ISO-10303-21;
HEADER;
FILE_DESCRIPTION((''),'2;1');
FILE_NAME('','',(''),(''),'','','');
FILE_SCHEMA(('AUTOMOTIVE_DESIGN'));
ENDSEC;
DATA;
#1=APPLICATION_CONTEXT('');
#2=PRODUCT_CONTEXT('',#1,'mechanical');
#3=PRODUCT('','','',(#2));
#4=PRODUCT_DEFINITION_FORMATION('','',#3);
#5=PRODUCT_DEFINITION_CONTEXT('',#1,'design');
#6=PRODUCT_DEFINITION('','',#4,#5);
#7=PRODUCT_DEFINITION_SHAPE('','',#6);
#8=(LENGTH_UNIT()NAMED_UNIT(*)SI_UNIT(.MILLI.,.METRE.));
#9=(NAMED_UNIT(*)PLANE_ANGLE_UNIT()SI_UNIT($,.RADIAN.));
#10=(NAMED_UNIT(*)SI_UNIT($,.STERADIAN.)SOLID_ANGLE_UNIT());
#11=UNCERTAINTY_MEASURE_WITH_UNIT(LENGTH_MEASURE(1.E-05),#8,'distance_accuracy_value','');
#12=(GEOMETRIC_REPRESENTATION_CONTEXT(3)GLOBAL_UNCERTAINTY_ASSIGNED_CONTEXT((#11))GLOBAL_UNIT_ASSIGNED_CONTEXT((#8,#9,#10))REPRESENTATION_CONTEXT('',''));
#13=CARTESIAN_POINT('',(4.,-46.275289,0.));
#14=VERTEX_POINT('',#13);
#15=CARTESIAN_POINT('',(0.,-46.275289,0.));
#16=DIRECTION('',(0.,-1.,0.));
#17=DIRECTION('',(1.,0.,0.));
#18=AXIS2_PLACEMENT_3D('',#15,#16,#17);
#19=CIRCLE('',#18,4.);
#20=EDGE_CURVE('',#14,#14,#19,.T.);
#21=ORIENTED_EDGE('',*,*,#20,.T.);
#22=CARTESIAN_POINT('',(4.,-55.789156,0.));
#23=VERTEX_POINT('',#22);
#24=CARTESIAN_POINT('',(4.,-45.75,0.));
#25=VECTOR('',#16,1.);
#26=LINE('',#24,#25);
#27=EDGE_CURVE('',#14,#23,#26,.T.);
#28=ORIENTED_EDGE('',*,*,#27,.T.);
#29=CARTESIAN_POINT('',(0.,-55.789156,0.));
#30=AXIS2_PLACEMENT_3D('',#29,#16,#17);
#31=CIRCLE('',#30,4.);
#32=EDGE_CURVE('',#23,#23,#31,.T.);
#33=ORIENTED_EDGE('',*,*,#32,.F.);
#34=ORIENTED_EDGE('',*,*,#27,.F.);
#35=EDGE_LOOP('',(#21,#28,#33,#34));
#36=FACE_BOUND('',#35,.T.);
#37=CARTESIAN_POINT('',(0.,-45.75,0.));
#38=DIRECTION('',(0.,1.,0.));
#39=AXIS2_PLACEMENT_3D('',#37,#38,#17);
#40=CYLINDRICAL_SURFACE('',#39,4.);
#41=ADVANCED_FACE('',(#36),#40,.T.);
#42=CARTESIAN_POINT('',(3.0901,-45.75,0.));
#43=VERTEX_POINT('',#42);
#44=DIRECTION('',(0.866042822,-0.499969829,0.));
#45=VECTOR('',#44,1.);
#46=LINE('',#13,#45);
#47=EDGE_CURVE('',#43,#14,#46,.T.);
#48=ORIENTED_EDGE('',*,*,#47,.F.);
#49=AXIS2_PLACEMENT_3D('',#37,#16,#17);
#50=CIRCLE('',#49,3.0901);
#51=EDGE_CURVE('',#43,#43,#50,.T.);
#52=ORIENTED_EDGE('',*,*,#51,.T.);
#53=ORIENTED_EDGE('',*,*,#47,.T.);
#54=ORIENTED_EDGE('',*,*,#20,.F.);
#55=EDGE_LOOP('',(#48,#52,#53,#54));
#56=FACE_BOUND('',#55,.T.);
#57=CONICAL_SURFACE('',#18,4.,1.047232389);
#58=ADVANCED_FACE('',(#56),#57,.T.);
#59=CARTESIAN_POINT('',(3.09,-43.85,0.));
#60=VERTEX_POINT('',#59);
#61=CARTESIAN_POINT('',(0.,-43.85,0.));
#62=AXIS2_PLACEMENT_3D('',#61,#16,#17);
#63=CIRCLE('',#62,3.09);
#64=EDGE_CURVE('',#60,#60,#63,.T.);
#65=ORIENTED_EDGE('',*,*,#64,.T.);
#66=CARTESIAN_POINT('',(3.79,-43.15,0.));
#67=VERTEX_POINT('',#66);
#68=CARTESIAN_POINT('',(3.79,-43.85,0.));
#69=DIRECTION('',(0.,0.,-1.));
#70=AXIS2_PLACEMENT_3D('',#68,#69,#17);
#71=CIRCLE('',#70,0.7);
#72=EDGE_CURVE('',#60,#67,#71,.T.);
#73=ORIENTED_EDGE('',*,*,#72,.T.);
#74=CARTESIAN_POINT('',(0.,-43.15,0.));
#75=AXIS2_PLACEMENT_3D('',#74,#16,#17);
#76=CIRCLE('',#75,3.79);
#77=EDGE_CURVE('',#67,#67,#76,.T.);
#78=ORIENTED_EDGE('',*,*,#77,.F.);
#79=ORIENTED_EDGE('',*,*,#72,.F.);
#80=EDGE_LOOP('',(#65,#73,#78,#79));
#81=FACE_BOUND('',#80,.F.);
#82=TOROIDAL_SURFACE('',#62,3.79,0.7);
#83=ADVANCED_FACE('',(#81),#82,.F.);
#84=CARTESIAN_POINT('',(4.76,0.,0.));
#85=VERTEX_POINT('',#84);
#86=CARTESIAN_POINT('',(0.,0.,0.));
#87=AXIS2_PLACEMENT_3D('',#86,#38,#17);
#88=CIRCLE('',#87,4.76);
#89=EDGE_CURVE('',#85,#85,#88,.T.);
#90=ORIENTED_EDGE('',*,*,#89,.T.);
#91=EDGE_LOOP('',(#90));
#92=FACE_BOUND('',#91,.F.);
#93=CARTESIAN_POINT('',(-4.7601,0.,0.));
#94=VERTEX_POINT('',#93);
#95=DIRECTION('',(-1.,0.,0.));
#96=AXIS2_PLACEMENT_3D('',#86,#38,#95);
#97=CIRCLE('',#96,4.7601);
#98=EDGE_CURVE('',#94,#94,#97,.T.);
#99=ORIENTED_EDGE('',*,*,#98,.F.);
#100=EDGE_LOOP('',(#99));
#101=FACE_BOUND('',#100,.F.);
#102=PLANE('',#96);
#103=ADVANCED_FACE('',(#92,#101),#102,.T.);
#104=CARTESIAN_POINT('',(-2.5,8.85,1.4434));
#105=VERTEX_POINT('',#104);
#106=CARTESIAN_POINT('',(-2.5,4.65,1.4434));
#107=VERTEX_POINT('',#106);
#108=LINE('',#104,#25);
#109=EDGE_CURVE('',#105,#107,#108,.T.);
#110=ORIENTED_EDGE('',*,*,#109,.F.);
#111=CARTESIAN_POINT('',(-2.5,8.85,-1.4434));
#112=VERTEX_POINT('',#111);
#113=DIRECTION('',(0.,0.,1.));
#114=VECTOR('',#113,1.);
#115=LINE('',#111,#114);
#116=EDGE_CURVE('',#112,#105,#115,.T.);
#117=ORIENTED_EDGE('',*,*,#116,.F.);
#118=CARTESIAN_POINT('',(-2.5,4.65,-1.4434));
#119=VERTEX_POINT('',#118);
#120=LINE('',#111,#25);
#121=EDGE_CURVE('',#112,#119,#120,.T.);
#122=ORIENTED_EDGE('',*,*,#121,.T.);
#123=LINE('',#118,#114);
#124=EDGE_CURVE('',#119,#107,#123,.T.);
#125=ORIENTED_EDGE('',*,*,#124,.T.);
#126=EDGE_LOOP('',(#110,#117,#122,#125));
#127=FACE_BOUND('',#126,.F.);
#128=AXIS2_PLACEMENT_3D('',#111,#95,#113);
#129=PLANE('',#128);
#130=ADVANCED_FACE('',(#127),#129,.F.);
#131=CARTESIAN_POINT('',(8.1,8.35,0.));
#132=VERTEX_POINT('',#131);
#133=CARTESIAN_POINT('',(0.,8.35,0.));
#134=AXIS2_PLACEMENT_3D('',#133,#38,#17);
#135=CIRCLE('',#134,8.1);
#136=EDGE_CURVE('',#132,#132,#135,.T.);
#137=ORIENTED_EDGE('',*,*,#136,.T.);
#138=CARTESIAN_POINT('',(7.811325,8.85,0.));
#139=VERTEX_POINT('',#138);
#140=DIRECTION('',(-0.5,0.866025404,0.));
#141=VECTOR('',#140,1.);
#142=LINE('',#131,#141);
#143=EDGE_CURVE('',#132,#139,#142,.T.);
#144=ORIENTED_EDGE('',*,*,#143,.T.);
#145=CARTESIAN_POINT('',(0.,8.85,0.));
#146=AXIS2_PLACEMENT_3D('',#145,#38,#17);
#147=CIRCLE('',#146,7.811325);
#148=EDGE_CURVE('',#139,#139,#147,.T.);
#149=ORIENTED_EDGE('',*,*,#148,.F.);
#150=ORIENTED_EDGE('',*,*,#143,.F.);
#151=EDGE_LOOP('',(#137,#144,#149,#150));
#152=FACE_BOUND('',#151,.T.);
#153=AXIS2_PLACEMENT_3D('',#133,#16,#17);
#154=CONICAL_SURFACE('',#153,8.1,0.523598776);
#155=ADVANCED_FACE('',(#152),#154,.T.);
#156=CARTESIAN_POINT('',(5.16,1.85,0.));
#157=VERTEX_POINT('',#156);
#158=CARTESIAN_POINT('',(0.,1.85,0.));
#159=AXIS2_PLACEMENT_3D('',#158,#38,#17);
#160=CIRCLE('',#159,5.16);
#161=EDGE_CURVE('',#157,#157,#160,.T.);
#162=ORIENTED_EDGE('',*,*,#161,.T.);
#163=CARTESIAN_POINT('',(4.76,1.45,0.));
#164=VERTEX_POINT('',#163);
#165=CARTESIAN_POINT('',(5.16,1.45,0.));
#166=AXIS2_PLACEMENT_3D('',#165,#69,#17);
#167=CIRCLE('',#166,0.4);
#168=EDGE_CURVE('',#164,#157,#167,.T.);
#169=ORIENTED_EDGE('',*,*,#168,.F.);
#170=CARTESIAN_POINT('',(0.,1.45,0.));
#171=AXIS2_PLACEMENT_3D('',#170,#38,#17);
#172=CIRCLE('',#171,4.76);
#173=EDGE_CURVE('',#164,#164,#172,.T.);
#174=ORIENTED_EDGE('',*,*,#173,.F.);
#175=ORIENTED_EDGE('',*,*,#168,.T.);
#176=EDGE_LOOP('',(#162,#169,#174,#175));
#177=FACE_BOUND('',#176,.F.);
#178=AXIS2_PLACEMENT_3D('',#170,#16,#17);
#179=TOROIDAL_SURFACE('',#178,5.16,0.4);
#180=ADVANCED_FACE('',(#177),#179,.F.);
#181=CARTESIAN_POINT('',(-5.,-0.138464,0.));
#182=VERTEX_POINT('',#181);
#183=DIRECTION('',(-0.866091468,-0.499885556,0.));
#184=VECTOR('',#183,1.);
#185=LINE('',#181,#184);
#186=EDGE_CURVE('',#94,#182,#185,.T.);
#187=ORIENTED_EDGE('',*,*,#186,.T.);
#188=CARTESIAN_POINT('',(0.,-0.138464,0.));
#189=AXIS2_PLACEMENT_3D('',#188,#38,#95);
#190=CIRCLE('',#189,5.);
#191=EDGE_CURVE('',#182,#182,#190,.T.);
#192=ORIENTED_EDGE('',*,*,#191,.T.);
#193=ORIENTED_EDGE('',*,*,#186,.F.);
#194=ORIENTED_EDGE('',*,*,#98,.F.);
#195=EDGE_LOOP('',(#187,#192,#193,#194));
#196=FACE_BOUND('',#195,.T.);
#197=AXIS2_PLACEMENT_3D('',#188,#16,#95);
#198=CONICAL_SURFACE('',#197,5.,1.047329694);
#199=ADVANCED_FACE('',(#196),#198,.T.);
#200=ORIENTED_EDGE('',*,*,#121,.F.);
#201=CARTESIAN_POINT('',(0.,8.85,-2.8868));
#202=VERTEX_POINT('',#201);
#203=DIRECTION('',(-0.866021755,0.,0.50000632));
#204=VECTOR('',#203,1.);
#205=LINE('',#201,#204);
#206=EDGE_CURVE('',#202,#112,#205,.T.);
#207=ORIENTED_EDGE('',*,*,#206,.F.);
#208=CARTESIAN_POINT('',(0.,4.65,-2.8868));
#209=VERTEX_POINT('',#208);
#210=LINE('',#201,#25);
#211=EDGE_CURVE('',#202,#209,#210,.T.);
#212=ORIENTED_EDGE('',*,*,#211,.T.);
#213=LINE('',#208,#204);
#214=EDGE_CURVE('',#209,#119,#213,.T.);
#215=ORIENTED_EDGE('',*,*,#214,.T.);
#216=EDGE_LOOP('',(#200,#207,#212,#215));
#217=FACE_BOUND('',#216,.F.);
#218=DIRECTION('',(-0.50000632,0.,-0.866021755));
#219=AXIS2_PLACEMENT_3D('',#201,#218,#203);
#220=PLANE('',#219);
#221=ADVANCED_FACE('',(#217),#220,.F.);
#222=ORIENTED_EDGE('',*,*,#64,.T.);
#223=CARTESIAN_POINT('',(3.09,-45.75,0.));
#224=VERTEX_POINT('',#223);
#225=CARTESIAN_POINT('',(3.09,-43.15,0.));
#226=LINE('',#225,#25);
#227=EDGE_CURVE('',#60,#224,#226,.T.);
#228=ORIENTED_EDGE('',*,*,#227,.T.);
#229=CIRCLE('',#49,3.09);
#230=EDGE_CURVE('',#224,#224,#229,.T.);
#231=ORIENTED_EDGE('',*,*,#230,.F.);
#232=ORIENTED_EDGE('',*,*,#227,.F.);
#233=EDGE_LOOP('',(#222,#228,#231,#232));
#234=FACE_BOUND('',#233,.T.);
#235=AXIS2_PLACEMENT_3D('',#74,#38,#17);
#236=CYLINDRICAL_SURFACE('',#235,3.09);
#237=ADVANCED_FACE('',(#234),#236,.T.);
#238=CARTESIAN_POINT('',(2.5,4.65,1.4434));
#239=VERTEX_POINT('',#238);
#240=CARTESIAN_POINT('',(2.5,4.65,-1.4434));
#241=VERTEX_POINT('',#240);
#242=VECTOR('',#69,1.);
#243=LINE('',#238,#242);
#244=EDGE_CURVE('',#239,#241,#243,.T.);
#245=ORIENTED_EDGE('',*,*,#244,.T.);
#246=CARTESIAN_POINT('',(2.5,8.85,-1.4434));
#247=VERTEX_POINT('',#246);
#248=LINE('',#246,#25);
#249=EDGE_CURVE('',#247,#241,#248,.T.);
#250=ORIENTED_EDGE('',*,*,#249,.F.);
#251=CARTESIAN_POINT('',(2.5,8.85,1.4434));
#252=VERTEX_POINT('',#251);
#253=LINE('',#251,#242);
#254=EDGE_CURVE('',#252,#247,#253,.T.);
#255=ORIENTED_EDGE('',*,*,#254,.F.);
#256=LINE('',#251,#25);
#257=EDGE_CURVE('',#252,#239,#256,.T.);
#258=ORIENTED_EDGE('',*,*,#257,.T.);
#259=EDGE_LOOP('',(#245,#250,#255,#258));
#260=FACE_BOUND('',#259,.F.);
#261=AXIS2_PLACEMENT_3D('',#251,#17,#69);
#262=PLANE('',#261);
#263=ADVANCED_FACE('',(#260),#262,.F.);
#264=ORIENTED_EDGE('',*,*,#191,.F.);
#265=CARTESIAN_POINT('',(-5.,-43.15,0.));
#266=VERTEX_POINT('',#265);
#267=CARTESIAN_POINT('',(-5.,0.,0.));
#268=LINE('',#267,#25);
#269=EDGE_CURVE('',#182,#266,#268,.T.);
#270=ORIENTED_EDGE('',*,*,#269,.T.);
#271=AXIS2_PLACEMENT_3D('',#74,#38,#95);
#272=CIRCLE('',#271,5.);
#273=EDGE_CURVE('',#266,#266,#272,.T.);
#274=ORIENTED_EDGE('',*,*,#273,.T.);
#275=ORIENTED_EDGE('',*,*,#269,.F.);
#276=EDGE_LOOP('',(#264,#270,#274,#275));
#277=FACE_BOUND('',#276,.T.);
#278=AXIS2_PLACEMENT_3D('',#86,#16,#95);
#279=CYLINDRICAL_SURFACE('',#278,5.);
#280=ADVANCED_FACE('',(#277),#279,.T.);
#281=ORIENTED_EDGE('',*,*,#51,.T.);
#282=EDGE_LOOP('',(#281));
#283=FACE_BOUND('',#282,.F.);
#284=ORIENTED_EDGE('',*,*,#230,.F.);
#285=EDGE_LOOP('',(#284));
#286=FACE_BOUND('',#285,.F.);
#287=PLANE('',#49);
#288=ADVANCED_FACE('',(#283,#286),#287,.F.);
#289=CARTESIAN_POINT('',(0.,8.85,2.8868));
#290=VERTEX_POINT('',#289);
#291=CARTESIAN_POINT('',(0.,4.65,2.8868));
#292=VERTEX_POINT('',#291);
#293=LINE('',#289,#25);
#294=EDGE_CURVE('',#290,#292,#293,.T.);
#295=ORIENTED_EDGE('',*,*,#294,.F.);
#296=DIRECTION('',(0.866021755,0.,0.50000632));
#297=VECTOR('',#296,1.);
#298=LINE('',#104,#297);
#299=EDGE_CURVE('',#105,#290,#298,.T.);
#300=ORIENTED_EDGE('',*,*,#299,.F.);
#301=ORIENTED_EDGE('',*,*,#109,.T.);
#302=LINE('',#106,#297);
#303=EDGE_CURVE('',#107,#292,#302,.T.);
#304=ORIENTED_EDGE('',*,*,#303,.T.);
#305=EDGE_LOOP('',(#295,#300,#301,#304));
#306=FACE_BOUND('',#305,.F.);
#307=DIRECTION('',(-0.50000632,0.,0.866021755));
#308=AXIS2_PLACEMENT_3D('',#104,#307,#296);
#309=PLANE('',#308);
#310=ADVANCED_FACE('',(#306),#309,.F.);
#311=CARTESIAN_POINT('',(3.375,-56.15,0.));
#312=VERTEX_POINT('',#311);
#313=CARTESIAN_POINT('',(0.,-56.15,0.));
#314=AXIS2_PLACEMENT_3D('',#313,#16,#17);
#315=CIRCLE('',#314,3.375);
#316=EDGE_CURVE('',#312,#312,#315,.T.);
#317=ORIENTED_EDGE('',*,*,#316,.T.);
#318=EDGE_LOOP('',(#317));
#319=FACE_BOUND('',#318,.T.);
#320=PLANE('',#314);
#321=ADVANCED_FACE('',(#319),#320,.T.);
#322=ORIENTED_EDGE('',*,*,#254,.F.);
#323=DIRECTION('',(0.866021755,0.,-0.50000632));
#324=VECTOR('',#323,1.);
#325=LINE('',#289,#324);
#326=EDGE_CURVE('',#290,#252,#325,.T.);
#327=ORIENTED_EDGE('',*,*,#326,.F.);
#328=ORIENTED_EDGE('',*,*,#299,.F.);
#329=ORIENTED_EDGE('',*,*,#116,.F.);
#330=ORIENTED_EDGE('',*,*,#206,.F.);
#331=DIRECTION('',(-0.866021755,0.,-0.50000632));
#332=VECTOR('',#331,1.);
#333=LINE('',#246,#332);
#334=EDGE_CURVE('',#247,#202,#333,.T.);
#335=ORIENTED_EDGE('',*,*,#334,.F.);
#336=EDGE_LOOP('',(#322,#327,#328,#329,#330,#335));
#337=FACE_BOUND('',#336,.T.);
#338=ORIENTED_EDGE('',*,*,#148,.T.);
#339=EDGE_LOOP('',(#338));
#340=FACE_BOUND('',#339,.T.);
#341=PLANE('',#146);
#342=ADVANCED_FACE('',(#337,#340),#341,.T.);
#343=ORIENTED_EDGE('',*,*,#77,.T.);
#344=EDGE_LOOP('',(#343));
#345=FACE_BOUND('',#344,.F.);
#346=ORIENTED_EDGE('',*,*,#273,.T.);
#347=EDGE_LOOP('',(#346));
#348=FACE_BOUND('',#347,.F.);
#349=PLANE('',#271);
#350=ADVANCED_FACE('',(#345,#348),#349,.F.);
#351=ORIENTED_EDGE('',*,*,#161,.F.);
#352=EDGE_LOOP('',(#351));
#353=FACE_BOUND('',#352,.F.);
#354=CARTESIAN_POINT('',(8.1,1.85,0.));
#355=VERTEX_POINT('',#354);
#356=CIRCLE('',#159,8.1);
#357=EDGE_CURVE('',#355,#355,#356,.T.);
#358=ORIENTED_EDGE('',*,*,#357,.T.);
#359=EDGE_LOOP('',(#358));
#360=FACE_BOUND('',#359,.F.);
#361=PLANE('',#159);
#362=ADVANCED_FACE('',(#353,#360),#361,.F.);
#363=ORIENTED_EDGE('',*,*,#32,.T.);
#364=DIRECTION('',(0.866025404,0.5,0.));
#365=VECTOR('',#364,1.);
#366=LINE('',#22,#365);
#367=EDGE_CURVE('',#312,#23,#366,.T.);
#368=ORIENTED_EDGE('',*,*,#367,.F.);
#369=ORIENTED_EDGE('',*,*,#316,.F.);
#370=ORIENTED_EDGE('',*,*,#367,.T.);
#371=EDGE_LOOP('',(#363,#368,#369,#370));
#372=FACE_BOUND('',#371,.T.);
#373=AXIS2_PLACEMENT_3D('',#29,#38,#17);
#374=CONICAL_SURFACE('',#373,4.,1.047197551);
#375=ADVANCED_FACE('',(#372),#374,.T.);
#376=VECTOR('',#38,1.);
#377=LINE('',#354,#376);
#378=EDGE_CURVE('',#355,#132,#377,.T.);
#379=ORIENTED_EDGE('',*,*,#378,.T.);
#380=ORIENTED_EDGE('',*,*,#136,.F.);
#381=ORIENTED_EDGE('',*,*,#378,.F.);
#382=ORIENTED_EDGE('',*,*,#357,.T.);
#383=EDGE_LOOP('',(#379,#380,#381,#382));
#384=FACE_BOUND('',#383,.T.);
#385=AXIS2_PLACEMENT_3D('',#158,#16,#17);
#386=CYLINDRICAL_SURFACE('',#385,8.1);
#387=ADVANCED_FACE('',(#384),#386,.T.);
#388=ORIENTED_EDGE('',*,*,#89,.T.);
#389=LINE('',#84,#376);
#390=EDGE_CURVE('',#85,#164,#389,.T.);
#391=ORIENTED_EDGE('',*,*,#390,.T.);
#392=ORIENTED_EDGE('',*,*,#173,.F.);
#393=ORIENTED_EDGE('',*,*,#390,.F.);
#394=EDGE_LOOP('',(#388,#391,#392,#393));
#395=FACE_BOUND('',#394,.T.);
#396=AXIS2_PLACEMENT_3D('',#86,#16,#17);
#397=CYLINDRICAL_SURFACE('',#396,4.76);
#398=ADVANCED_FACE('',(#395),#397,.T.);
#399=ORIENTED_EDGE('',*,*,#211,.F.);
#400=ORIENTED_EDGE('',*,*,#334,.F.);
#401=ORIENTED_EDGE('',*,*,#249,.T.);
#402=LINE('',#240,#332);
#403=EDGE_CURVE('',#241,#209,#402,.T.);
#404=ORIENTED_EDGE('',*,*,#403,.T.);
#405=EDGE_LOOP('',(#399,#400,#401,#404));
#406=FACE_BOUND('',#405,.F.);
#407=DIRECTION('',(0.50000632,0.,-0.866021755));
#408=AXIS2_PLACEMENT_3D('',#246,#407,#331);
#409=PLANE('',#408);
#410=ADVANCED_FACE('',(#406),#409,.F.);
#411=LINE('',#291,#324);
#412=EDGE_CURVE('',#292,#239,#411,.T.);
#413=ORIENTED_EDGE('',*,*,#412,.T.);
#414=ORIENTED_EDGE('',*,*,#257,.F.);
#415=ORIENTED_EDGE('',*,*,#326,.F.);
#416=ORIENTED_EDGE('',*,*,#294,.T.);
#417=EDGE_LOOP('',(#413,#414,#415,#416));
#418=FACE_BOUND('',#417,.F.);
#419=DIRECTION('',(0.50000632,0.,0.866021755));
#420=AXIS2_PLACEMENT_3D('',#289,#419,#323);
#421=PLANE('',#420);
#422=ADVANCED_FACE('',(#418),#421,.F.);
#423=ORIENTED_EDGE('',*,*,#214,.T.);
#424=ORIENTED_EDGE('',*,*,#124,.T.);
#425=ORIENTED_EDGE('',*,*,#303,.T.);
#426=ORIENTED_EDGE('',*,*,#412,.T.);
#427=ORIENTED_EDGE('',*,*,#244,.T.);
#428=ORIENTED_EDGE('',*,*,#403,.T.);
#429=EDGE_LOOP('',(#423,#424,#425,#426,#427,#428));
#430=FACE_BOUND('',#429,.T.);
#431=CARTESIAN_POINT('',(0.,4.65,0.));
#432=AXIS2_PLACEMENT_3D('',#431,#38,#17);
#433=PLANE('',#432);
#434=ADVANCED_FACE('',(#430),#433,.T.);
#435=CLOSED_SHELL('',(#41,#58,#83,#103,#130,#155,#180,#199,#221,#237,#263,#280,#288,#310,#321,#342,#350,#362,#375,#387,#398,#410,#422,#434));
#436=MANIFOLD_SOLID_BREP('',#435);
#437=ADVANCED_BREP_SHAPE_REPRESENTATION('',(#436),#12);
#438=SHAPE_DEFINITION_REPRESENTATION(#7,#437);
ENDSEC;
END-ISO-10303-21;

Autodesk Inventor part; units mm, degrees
ref_plane "YZ Plane" through (0, 0, 0) normal (1, 0, 0) x (0, 1, 0)
ref_plane "XZ Plane" through (0, 0, 0) normal (0, 1, 0) x (-1, 0, 0)
ref_plane "XY Plane" through (0, 0, 0) normal (0, 0, 1) x (1, 0, 0)
sketch "Sketch1" plane through (0, 0, 0) normal (0, 0, 1) x (1, 0, 0)
  line L0 (0, 0) -> (-5, 0)
  line L1 (-5, 0) -> (-5, -43.15)
  line L2 (-5, -43.15) -> (0, -43.15)
  line L3 (0, -43.15) -> (0, 0)
  line L4 (0, 0) -> (-13.1356, 0) construction
  dimension "d1" = 43.15
  dimension "d2" = 5
revolve "Shoulder" add sketch "Sketch1" angle 360 about axis through (0, -43.15, 0) along (0, 1, 0)
sketch "Sketch2" plane through (0, 0, 0) normal (0, 1, 0) x (1, 0, 0)
  circle A0 centre (0, 0) radius 5 projected
  circle A1 centre (0, 0) radius 4.76
  dimension "d3" = 9.52
extrude "Shoulder_neck" add sketch "Sketch2" along normal blind 1.85 contours A1
sketch "Sketch3" plane through (0, 1.85, 0) normal (0, 1, 0) x (1, 0, 0)
  circle A0 centre (0, 0) radius 4.76 projected
  circle A1 centre (0, 0) radius 8.1
  dimension "d6" = 16.2
extrude "Head" add sketch "Sketch3" along normal blind 7 contours A0 | A1
sketch "Sketch4" plane through (0, -43.15, 0) normal (0, -1, 0) x (1, 0, 0)
  circle A0 centre (0, 0) radius 5 projected
  circle A1 centre (0, 0) radius 3.09
  dimension "d9" = 6.18
extrude "Thread_neck" add sketch "Sketch4" along normal blind 2.6 contours A1
sketch "Sketch5" plane through (0, -45.75, 0) normal (0, -1, 0) x (1, 0, 0)
  circle A0 centre (0, 0) radius 3.09 projected
  circle A1 centre (0, 0) radius 4
  dimension "d12" = 8
extrude "Thread_shoulder" add sketch "Sketch5" along normal blind 10.4 contours A0 | A1
sketch "Sketch6" plane through (0, 8.85, 0) normal (0, 1, 0) x (1, 0, 0)
  circle A0 centre (0, 0) radius 8.1 projected
  circle A1 centre (0, 0) radius 2.5 construction
  line L0 (-2.5, 1.4434) -> (-2.5, -1.4434)
  line L1 (-2.5, -1.4434) -> (0, -2.8868)
  line L2 (0, -2.8868) -> (2.5, -1.4434)
  line L3 (2.5, -1.4434) -> (2.5, 1.4434)
  line L4 (2.5, 1.4434) -> (0, 2.8868)
  line L5 (0, 2.8868) -> (-2.5, 1.4434)
  dimension "d15" = 5
extrude "Hex" cut sketch "Sketch6" against normal blind 4.2 contours L5 L4 L3 L2 L1 L0
chamfer "Chamfer1" distance 0.24 angle 30 1 edges at (5, 0, 0) measured on face at (-4.8255, 0, -0.7786)
fillet "Fillet1" radius 0.4 1 edges at (-4.76, 1.85, 0)
chamfer "Chamfer2" distance 0.5 angle 30 1 edges at (-8.1, 8.85, 0) measured on face at (7.9951, 6.5167, 1.2993)
chamfer "Chamfer3" distance 0.625 angle 30 1 edges at (-4, -56.15, 0) measured on face at (0.7574, -56.15, 1.0973)
fillet "Fillet2" radius 0.7 1 edges at (-3.09, -43.15, 0)
chamfer "Chamfer7" distance 0.91 angle 30 1 edges at (-4, -45.75, 0) measured on face at (3.6579, -45.75, -0.3191)
thread "Thread" size "M8x1.25" class "6g" standard "ANSI Metric M Profile" full length
equation "\"d3\" = Shoulder_neck_dia"
equation "\"d4\" = Shoulder_neck_length"
equation "\"d6\" = Head_diameter"
equation "\"d7\" = Head_height"
equation "\"d9\" = Thread_neck_dia"
equation "\"d10\" = Thread_neck_length"
equation "\"d12\" = Thread_diameter"
equation "\"d13\" = Thread_length - Thread_neck_length"
equation "\"d15\" = Hex_size"
equation "\"d16\" = Hex_length"
equation "\"d18\" = -0.5 * Shoulder_neck_dia + 0.5 * Shoulder_diameter"
equation "\"d64\" = -0.5 * Shoulder_neck_dia + 0.5 * Shoulder_diameter"
equation "\"d21\" = 0.1 * Hex_size"
equation "\"d65\" = 0.1 * Hex_size"
equation "\"d23\" = 0.5 * Thread_pitch"
equation "\"d66\" = 0.5 * Thread_pitch"
equation "\"d25\" = Thread_neck_radius"
equation "\"d60\" = -0.5 * Thread_neck_dia + 0.5 * Thread_diameter"
equation "\"d67\" = -0.5 * Thread_neck_dia + 0.5 * Thread_diameter"
equation "\"d1\" = Shoulder_length - Shoulder_neck_length"
equation "\"d2\" = 0.5 * Shoulder_diameter"
equation "\"Shoulder_length\" = 45"
equation "\"Shoulder_neck_dia\" = 9.52"
equation "\"Thread_diameter\" = 8"
equation "\"Thread_length\" = 13"
equation "\"Head_diameter\" = 16.2"
equation "\"Head_height\" = 7"
equation "\"Thread_neck_dia\" = 6.18"
equation "\"Hex_size\" = 5"
equation "\"Hex_length\" = 4.2"
equation "\"Thread_pitch\" = 1.25"
equation "\"Shoulder_neck_length\" = 1.85"
equation "\"Thread_neck_length\" = 2.6"
equation "\"Thread_neck_radius\" = 0.7"
equation "\"Shoulder_diameter\" = 10"
properties part number "SCREW, SHOULDER, P, 12" material "Steel, High Strength Low Alloy"
